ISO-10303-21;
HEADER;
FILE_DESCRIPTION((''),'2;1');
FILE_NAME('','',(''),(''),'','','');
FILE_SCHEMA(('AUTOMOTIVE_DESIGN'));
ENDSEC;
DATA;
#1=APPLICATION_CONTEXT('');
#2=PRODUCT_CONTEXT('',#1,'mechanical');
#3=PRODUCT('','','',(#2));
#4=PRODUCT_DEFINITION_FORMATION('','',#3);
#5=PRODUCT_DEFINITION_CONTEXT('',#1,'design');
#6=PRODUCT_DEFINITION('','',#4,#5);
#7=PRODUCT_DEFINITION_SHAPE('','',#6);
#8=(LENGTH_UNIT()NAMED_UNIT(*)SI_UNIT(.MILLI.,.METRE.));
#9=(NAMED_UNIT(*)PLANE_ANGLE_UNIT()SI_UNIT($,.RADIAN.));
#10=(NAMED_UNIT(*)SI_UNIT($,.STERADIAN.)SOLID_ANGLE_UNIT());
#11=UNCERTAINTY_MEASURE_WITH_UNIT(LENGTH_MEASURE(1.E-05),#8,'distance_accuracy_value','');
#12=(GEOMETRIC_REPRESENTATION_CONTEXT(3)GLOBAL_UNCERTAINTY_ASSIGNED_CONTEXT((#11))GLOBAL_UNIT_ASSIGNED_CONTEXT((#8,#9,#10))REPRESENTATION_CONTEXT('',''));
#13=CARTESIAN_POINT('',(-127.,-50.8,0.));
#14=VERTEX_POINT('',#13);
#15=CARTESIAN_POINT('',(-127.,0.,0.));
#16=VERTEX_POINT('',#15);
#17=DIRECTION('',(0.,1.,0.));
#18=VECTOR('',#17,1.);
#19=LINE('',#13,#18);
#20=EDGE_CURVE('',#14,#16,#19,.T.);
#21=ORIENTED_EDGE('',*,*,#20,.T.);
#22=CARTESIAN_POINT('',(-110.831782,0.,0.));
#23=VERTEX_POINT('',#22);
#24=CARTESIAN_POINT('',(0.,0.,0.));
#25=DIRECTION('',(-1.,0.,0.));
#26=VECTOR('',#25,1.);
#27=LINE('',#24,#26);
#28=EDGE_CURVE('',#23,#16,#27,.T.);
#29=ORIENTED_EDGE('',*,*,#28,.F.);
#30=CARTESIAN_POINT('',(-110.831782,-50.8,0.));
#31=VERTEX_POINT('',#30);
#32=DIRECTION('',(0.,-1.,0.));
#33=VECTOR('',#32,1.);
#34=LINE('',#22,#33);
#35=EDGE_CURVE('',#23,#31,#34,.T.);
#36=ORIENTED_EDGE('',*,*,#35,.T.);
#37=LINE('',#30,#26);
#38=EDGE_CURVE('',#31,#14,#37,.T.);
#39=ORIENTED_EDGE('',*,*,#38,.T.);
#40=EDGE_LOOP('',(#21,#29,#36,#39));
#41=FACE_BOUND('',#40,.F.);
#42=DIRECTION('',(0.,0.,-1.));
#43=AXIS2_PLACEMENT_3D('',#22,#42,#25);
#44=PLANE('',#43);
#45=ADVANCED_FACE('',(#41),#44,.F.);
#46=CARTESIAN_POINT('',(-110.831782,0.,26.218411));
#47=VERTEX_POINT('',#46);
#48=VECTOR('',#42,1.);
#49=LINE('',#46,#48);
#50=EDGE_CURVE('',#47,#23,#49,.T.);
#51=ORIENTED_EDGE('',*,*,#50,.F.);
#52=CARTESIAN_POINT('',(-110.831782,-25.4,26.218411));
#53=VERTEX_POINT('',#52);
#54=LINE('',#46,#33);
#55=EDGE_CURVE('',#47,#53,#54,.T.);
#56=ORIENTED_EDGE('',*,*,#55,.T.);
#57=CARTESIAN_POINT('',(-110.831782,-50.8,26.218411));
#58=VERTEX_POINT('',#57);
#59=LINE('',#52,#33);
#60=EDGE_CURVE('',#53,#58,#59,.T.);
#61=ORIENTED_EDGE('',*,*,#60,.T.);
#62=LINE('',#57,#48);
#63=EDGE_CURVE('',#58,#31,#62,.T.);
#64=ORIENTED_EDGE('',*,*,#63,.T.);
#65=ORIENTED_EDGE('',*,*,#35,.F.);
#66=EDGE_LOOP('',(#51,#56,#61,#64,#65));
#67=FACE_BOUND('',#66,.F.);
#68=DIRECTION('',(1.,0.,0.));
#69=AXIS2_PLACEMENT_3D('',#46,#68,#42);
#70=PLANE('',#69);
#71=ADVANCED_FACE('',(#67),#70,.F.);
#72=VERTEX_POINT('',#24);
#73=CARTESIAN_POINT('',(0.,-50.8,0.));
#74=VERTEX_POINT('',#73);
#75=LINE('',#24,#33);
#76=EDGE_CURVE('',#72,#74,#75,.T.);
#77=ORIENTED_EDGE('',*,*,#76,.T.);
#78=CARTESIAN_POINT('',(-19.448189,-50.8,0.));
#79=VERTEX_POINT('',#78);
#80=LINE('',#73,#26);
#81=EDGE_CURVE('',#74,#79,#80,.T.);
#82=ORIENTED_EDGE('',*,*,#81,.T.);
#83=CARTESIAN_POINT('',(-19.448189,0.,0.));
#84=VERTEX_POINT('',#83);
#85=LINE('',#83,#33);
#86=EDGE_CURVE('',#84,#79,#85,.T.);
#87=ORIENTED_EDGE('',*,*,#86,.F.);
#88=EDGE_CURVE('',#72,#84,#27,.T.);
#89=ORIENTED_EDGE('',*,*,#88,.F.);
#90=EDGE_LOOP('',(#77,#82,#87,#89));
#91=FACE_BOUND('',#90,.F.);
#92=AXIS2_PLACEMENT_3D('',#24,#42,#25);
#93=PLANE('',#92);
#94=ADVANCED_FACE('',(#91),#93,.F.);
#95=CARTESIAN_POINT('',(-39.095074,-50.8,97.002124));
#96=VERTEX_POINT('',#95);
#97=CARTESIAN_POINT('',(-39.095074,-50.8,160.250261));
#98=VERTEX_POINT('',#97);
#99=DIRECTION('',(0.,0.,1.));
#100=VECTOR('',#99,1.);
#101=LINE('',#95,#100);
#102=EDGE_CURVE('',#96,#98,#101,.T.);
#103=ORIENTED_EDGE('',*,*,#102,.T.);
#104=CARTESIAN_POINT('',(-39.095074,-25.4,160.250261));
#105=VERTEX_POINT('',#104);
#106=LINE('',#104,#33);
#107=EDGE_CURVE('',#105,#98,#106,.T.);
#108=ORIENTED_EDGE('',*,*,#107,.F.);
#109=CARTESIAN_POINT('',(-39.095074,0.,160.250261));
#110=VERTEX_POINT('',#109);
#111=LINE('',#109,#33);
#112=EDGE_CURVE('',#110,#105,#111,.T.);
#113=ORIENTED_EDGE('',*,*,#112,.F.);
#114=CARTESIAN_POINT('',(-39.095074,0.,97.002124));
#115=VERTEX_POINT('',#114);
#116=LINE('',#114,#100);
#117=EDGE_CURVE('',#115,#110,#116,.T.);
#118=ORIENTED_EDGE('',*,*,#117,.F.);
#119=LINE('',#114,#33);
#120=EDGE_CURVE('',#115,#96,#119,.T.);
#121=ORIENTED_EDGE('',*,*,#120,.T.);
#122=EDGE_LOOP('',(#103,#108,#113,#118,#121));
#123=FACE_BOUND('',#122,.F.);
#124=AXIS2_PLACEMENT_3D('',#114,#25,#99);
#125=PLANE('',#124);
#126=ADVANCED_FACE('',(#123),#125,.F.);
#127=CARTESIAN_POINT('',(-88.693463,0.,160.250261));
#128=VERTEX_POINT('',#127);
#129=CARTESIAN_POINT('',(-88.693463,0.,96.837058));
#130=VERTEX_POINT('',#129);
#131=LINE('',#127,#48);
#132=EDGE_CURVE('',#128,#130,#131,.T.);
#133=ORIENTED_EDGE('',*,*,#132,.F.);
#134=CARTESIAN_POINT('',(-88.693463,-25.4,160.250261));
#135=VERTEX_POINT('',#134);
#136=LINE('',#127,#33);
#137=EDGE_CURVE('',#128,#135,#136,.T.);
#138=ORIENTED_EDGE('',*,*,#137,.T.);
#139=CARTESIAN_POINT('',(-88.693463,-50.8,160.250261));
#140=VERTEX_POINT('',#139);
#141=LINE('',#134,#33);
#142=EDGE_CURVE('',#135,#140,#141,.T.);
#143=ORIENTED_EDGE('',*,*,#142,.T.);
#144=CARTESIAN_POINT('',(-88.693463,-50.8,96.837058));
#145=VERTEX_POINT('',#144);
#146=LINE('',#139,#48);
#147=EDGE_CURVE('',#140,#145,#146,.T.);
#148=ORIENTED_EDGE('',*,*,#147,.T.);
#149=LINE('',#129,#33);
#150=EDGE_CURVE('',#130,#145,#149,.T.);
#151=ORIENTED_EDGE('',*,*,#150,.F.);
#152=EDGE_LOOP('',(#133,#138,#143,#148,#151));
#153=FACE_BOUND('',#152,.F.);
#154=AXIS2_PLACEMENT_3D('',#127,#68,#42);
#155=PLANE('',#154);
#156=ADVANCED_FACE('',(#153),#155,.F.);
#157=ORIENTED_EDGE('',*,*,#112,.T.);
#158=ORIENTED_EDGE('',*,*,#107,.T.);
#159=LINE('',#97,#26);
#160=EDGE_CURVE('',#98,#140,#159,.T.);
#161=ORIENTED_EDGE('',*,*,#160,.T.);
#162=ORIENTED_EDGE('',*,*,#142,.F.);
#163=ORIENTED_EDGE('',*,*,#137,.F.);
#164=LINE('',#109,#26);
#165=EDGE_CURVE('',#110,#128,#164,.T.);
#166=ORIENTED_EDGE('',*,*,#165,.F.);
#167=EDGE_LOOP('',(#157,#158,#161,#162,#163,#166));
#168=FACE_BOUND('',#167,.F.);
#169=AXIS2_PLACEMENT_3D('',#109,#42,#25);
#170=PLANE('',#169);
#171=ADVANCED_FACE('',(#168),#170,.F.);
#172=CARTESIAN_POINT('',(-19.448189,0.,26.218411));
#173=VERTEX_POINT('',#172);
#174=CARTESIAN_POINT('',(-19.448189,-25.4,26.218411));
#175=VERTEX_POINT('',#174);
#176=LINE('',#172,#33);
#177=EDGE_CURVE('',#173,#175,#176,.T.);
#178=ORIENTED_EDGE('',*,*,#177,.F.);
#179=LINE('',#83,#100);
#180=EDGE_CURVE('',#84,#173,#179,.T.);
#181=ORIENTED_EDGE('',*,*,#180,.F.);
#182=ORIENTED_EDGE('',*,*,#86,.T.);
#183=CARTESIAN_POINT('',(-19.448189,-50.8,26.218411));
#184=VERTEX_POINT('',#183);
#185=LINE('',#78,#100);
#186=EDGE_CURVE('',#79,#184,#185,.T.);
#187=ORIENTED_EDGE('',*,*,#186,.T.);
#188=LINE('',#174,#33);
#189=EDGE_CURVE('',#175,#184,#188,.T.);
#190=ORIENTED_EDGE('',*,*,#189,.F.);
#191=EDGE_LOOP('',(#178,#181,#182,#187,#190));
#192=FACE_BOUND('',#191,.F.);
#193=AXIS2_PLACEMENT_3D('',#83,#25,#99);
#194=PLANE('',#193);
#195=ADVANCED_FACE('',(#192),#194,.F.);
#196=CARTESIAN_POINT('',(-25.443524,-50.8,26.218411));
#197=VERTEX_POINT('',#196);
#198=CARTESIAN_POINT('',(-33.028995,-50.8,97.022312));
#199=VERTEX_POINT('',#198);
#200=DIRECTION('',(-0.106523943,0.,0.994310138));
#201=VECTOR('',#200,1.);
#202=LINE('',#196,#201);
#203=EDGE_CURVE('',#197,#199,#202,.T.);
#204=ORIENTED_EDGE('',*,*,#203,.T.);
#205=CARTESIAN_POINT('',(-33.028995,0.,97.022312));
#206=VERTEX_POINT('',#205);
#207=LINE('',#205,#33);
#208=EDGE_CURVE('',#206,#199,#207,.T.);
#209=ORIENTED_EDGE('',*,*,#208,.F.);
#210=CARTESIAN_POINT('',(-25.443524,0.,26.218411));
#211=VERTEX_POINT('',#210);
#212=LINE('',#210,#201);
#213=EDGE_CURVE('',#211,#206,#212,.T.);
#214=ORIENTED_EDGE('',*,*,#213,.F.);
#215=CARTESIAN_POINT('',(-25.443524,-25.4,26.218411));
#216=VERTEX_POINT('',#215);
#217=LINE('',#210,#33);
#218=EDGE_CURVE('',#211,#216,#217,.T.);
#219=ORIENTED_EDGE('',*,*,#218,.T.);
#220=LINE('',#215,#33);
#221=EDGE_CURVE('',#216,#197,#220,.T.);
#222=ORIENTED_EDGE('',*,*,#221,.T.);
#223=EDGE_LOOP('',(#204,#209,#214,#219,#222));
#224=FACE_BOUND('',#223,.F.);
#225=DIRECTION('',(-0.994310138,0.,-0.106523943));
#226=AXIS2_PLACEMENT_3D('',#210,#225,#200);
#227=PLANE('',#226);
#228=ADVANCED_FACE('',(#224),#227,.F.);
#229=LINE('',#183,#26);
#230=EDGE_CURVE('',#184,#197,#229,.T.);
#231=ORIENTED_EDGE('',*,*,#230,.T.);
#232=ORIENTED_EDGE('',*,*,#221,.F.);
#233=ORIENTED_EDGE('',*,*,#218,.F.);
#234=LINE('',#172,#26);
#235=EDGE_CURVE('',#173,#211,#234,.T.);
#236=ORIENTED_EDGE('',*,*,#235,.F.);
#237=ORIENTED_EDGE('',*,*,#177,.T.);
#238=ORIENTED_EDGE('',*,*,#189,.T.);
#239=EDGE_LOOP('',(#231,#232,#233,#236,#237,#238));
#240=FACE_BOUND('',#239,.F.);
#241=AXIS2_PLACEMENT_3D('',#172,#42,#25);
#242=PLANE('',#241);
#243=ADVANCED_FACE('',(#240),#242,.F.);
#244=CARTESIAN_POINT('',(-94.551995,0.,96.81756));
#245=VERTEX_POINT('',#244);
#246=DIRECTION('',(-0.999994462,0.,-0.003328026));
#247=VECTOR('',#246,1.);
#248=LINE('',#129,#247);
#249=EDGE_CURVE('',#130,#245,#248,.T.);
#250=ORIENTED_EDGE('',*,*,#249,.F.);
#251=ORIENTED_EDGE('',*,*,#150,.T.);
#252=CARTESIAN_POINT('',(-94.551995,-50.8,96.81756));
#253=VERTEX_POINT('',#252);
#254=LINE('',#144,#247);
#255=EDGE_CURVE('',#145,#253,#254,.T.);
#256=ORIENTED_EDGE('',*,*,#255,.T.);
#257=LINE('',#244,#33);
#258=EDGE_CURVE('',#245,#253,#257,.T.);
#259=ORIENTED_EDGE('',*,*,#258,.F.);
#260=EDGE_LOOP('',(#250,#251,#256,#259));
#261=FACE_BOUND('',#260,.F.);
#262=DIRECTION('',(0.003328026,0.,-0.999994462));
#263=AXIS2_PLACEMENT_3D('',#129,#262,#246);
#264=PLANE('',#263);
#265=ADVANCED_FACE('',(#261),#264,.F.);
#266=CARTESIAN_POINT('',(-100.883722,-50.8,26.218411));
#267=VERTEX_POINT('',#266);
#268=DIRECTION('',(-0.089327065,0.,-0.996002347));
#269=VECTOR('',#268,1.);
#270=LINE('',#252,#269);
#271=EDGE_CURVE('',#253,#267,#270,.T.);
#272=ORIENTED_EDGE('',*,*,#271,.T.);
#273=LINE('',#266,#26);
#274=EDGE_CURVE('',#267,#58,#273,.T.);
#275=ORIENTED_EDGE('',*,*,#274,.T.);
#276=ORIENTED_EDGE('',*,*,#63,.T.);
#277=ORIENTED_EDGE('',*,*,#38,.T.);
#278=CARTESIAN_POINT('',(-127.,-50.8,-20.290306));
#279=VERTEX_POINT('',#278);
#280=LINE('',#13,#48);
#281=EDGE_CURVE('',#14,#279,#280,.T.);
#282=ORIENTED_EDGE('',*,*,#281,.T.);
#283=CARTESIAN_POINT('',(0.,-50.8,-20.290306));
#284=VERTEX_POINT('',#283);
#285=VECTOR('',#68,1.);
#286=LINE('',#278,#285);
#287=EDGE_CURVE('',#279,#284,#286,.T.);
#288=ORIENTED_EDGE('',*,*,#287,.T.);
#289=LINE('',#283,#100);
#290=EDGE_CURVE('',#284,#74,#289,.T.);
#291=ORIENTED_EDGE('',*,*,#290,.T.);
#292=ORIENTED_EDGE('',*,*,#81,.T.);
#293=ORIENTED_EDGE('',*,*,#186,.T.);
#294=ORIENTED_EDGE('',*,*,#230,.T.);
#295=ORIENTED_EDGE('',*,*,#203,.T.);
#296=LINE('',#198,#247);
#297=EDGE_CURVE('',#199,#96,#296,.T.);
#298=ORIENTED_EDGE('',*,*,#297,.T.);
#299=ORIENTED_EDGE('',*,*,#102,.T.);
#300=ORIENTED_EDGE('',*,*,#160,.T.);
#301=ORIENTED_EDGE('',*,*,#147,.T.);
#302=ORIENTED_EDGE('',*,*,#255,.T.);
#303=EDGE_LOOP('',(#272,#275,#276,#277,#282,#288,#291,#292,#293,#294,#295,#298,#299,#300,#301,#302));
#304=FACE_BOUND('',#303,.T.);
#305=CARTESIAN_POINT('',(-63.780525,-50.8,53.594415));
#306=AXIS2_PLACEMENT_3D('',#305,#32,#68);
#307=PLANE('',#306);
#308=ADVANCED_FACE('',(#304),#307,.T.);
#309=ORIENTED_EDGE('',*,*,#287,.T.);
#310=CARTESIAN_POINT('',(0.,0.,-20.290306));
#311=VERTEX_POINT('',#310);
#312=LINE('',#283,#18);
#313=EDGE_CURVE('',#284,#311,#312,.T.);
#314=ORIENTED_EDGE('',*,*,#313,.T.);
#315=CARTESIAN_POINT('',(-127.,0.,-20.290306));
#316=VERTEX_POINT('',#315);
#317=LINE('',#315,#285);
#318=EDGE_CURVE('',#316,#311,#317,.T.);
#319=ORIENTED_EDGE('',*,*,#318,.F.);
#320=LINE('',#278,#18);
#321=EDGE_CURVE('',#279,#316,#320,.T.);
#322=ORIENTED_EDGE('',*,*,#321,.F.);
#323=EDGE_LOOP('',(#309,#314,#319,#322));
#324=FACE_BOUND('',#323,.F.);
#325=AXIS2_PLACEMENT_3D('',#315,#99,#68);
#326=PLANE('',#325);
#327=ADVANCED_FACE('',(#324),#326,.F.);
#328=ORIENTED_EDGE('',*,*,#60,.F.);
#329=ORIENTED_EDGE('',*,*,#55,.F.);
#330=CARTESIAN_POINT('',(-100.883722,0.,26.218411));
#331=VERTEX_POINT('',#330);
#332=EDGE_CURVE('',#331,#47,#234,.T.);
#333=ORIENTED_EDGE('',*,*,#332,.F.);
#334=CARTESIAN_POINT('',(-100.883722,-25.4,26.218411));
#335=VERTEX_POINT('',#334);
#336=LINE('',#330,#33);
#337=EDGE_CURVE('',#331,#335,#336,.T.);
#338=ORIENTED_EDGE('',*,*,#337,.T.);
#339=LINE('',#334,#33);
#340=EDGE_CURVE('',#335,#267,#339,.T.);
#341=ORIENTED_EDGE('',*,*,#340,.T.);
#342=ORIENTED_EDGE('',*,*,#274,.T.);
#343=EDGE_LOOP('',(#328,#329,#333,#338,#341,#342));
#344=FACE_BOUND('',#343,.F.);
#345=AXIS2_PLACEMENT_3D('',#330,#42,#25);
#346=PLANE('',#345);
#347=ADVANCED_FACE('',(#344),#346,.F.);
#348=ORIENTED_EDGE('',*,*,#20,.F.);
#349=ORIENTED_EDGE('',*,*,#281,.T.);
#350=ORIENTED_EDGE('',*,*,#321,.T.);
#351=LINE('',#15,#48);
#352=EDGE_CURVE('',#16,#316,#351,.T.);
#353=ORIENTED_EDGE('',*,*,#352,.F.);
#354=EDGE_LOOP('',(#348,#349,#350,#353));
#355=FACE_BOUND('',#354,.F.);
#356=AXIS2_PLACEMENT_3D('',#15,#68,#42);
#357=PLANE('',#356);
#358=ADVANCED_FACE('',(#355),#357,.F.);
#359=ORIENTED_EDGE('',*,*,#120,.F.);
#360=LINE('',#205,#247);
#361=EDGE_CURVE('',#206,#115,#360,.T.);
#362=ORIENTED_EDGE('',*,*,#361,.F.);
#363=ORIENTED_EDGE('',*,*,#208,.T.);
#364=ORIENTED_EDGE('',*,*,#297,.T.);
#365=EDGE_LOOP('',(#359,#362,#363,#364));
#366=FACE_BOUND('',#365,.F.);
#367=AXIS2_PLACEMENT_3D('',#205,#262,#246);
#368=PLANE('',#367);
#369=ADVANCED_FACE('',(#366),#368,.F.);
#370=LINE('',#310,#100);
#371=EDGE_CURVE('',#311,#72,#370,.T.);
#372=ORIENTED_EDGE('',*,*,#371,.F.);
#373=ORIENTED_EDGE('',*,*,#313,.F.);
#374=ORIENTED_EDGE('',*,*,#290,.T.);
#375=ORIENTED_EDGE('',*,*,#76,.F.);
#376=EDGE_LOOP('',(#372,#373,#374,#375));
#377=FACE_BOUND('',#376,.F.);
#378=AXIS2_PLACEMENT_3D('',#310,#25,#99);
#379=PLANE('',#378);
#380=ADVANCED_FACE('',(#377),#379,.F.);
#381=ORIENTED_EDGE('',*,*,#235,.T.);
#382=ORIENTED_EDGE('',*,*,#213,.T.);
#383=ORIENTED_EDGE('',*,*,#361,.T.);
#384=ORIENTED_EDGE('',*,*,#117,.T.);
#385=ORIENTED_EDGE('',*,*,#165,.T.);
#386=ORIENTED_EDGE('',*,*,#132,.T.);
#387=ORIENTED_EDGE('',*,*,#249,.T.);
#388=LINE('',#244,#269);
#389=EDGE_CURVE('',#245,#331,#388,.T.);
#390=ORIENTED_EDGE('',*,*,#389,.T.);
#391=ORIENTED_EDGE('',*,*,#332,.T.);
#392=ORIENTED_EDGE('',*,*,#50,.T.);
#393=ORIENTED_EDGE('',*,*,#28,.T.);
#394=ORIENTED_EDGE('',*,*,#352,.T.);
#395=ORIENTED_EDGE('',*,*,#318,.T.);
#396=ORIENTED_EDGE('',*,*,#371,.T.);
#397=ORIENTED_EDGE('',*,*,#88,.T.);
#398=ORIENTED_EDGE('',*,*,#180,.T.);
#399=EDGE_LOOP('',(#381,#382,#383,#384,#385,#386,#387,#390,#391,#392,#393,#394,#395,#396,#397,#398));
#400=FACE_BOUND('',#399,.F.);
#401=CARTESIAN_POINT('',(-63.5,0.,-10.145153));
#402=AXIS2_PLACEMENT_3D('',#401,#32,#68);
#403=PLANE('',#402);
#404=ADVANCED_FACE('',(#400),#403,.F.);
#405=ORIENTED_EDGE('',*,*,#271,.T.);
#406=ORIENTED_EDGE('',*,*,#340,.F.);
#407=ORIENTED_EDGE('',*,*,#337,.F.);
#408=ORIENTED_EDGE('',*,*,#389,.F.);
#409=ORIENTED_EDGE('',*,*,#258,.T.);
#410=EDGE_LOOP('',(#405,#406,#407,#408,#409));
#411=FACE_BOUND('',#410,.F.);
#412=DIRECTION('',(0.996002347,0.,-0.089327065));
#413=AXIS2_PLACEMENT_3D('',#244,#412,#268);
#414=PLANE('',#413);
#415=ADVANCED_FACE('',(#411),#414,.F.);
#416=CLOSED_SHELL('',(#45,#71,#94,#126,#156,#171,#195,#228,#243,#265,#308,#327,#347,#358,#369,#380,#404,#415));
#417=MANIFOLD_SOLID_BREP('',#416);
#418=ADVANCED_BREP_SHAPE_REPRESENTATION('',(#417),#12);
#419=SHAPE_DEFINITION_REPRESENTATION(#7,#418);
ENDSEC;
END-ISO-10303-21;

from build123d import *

# Parameters (mm, degrees)
F1_DEPTH = 25.4
F4_DEPTH = 25.4
F5_DEPTH = 25.4


# Not quite as in the source:
# - the program builds the solid bodies; features that only make, move or delete a surface that nothing else refers to are left out


with BuildPart() as f1:
    # F0 (on Front) → F1 (new body)
    with BuildSketch(Plane.XZ):
        Polygon((0, -20.290305838), (0, 0), (-19.4481890649, 0), (-110.8317822218, 0), (-127, 0), (-127, -20.290305838), align=None)
        Polygon((-110.8317822218, 0), (-19.4481890649, 0), (-19.4481890649, 26.2184105814), (-25.4435241222, 26.2184105814), (-100.8837223053, 26.2184105814), (-110.8317822218, 26.2184105814), align=None)
        Polygon((-100.8837223053, 26.2184105814), (-25.4435241222, 26.2184105814), (-33.0289951575, 97.0223118013), (-39.0950739384, 97.0021236187), (-39.0950739384, 96.837057952), (-88.6934632531, 96.837057952), (-94.5519953966, 96.8175604939), align=None)
    extrude(amount=F1_DEPTH)

    # F0 (on Front) → F4 (join)
    with BuildSketch(Plane.XZ):
        Polygon((0, -20.290305838), (0, 0), (-19.4481890649, 0), (-110.8317822218, 0), (-127, 0), (-127, -20.290305838), align=None)
        Polygon((-110.8317822218, 0), (-19.4481890649, 0), (-19.4481890649, 26.2184105814), (-25.4435241222, 26.2184105814), (-100.8837223053, 26.2184105814), (-110.8317822218, 26.2184105814), align=None)
        Polygon((-100.8837223053, 26.2184105814), (-25.4435241222, 26.2184105814), (-33.0289951575, 97.0223118013), (-39.0950739384, 97.0021236187), (-39.0950739384, 96.837057952), (-88.6934632531, 96.837057952), (-94.5519953966, 96.8175604939), align=None)
        Polygon((-39.0950739384, 96.837057952), (-39.0950739384, 97.0021236187), (-88.6934632531, 96.837057952), align=None)
        Polygon((-88.6934632531, 96.837057952), (-39.0950739384, 97.0021236187), (-39.0950739384, 160.250261426), (-88.6934632531, 160.250261426), align=None)
    extrude(amount=F4_DEPTH)

    # F0 (on Front) + F4_face (on face) → F5 (join)
    with BuildSketch(Plane.XZ):
        Polygon((0, -20.290305838), (0, 0), (-19.4481890649, 0), (-110.8317822218, 0), (-127, 0), (-127, -20.290305838), align=None)
        Polygon((-110.8317822218, 0), (-19.4481890649, 0), (-19.4481890649, 26.2184105814), (-25.4435241222, 26.2184105814), (-100.8837223053, 26.2184105814), (-110.8317822218, 26.2184105814), align=None)
        Polygon((-100.8837223053, 26.2184105814), (-25.4435241222, 26.2184105814), (-33.0289951575, 97.0223118013), (-39.0950739384, 97.0021236187), (-39.0950739384, 96.837057952), (-88.6934632531, 96.837057952), (-94.5519953966, 96.8175604939), align=None)
        Polygon((-39.0950739384, 96.837057952), (-39.0950739384, 97.0021236187), (-88.6934632531, 96.837057952), align=None)
        Polygon((-88.6934632531, 96.837057952), (-39.0950739384, 97.0021236187), (-39.0950739384, 160.250261426), (-88.6934632531, 160.250261426), align=None)
    with BuildSketch(Plane(origin=(-63.8821440169, -25.4, 54.1439890392), x_dir=(1, 0, 0), z_dir=(0, -1, 0))):
        Polygon((63.8821440169, -74.4342948772), (63.8821440169, -54.1439890392), (44.433954952, -54.1439890392), (44.433954952, -27.9255784579), (38.4386198947, -27.9255784579), (30.8531488594, 42.8783227621), (24.7870700785, 42.8581345795), (24.7870700785, 106.1062723867), (-24.8113192362, 106.1062723867), (-24.8113192362, 42.6930689128), (-30.6698513797, 42.6735714547), (-37.0015782884, -27.9255784579), (-46.9496382049, -27.9255784579), (-46.9496382049, -54.1439890392), (-63.1178559831, -54.1439890392), (-63.1178559831, -74.4342948772), align=None)
    extrude(amount=F5_DEPTH)


solid = f1.part
